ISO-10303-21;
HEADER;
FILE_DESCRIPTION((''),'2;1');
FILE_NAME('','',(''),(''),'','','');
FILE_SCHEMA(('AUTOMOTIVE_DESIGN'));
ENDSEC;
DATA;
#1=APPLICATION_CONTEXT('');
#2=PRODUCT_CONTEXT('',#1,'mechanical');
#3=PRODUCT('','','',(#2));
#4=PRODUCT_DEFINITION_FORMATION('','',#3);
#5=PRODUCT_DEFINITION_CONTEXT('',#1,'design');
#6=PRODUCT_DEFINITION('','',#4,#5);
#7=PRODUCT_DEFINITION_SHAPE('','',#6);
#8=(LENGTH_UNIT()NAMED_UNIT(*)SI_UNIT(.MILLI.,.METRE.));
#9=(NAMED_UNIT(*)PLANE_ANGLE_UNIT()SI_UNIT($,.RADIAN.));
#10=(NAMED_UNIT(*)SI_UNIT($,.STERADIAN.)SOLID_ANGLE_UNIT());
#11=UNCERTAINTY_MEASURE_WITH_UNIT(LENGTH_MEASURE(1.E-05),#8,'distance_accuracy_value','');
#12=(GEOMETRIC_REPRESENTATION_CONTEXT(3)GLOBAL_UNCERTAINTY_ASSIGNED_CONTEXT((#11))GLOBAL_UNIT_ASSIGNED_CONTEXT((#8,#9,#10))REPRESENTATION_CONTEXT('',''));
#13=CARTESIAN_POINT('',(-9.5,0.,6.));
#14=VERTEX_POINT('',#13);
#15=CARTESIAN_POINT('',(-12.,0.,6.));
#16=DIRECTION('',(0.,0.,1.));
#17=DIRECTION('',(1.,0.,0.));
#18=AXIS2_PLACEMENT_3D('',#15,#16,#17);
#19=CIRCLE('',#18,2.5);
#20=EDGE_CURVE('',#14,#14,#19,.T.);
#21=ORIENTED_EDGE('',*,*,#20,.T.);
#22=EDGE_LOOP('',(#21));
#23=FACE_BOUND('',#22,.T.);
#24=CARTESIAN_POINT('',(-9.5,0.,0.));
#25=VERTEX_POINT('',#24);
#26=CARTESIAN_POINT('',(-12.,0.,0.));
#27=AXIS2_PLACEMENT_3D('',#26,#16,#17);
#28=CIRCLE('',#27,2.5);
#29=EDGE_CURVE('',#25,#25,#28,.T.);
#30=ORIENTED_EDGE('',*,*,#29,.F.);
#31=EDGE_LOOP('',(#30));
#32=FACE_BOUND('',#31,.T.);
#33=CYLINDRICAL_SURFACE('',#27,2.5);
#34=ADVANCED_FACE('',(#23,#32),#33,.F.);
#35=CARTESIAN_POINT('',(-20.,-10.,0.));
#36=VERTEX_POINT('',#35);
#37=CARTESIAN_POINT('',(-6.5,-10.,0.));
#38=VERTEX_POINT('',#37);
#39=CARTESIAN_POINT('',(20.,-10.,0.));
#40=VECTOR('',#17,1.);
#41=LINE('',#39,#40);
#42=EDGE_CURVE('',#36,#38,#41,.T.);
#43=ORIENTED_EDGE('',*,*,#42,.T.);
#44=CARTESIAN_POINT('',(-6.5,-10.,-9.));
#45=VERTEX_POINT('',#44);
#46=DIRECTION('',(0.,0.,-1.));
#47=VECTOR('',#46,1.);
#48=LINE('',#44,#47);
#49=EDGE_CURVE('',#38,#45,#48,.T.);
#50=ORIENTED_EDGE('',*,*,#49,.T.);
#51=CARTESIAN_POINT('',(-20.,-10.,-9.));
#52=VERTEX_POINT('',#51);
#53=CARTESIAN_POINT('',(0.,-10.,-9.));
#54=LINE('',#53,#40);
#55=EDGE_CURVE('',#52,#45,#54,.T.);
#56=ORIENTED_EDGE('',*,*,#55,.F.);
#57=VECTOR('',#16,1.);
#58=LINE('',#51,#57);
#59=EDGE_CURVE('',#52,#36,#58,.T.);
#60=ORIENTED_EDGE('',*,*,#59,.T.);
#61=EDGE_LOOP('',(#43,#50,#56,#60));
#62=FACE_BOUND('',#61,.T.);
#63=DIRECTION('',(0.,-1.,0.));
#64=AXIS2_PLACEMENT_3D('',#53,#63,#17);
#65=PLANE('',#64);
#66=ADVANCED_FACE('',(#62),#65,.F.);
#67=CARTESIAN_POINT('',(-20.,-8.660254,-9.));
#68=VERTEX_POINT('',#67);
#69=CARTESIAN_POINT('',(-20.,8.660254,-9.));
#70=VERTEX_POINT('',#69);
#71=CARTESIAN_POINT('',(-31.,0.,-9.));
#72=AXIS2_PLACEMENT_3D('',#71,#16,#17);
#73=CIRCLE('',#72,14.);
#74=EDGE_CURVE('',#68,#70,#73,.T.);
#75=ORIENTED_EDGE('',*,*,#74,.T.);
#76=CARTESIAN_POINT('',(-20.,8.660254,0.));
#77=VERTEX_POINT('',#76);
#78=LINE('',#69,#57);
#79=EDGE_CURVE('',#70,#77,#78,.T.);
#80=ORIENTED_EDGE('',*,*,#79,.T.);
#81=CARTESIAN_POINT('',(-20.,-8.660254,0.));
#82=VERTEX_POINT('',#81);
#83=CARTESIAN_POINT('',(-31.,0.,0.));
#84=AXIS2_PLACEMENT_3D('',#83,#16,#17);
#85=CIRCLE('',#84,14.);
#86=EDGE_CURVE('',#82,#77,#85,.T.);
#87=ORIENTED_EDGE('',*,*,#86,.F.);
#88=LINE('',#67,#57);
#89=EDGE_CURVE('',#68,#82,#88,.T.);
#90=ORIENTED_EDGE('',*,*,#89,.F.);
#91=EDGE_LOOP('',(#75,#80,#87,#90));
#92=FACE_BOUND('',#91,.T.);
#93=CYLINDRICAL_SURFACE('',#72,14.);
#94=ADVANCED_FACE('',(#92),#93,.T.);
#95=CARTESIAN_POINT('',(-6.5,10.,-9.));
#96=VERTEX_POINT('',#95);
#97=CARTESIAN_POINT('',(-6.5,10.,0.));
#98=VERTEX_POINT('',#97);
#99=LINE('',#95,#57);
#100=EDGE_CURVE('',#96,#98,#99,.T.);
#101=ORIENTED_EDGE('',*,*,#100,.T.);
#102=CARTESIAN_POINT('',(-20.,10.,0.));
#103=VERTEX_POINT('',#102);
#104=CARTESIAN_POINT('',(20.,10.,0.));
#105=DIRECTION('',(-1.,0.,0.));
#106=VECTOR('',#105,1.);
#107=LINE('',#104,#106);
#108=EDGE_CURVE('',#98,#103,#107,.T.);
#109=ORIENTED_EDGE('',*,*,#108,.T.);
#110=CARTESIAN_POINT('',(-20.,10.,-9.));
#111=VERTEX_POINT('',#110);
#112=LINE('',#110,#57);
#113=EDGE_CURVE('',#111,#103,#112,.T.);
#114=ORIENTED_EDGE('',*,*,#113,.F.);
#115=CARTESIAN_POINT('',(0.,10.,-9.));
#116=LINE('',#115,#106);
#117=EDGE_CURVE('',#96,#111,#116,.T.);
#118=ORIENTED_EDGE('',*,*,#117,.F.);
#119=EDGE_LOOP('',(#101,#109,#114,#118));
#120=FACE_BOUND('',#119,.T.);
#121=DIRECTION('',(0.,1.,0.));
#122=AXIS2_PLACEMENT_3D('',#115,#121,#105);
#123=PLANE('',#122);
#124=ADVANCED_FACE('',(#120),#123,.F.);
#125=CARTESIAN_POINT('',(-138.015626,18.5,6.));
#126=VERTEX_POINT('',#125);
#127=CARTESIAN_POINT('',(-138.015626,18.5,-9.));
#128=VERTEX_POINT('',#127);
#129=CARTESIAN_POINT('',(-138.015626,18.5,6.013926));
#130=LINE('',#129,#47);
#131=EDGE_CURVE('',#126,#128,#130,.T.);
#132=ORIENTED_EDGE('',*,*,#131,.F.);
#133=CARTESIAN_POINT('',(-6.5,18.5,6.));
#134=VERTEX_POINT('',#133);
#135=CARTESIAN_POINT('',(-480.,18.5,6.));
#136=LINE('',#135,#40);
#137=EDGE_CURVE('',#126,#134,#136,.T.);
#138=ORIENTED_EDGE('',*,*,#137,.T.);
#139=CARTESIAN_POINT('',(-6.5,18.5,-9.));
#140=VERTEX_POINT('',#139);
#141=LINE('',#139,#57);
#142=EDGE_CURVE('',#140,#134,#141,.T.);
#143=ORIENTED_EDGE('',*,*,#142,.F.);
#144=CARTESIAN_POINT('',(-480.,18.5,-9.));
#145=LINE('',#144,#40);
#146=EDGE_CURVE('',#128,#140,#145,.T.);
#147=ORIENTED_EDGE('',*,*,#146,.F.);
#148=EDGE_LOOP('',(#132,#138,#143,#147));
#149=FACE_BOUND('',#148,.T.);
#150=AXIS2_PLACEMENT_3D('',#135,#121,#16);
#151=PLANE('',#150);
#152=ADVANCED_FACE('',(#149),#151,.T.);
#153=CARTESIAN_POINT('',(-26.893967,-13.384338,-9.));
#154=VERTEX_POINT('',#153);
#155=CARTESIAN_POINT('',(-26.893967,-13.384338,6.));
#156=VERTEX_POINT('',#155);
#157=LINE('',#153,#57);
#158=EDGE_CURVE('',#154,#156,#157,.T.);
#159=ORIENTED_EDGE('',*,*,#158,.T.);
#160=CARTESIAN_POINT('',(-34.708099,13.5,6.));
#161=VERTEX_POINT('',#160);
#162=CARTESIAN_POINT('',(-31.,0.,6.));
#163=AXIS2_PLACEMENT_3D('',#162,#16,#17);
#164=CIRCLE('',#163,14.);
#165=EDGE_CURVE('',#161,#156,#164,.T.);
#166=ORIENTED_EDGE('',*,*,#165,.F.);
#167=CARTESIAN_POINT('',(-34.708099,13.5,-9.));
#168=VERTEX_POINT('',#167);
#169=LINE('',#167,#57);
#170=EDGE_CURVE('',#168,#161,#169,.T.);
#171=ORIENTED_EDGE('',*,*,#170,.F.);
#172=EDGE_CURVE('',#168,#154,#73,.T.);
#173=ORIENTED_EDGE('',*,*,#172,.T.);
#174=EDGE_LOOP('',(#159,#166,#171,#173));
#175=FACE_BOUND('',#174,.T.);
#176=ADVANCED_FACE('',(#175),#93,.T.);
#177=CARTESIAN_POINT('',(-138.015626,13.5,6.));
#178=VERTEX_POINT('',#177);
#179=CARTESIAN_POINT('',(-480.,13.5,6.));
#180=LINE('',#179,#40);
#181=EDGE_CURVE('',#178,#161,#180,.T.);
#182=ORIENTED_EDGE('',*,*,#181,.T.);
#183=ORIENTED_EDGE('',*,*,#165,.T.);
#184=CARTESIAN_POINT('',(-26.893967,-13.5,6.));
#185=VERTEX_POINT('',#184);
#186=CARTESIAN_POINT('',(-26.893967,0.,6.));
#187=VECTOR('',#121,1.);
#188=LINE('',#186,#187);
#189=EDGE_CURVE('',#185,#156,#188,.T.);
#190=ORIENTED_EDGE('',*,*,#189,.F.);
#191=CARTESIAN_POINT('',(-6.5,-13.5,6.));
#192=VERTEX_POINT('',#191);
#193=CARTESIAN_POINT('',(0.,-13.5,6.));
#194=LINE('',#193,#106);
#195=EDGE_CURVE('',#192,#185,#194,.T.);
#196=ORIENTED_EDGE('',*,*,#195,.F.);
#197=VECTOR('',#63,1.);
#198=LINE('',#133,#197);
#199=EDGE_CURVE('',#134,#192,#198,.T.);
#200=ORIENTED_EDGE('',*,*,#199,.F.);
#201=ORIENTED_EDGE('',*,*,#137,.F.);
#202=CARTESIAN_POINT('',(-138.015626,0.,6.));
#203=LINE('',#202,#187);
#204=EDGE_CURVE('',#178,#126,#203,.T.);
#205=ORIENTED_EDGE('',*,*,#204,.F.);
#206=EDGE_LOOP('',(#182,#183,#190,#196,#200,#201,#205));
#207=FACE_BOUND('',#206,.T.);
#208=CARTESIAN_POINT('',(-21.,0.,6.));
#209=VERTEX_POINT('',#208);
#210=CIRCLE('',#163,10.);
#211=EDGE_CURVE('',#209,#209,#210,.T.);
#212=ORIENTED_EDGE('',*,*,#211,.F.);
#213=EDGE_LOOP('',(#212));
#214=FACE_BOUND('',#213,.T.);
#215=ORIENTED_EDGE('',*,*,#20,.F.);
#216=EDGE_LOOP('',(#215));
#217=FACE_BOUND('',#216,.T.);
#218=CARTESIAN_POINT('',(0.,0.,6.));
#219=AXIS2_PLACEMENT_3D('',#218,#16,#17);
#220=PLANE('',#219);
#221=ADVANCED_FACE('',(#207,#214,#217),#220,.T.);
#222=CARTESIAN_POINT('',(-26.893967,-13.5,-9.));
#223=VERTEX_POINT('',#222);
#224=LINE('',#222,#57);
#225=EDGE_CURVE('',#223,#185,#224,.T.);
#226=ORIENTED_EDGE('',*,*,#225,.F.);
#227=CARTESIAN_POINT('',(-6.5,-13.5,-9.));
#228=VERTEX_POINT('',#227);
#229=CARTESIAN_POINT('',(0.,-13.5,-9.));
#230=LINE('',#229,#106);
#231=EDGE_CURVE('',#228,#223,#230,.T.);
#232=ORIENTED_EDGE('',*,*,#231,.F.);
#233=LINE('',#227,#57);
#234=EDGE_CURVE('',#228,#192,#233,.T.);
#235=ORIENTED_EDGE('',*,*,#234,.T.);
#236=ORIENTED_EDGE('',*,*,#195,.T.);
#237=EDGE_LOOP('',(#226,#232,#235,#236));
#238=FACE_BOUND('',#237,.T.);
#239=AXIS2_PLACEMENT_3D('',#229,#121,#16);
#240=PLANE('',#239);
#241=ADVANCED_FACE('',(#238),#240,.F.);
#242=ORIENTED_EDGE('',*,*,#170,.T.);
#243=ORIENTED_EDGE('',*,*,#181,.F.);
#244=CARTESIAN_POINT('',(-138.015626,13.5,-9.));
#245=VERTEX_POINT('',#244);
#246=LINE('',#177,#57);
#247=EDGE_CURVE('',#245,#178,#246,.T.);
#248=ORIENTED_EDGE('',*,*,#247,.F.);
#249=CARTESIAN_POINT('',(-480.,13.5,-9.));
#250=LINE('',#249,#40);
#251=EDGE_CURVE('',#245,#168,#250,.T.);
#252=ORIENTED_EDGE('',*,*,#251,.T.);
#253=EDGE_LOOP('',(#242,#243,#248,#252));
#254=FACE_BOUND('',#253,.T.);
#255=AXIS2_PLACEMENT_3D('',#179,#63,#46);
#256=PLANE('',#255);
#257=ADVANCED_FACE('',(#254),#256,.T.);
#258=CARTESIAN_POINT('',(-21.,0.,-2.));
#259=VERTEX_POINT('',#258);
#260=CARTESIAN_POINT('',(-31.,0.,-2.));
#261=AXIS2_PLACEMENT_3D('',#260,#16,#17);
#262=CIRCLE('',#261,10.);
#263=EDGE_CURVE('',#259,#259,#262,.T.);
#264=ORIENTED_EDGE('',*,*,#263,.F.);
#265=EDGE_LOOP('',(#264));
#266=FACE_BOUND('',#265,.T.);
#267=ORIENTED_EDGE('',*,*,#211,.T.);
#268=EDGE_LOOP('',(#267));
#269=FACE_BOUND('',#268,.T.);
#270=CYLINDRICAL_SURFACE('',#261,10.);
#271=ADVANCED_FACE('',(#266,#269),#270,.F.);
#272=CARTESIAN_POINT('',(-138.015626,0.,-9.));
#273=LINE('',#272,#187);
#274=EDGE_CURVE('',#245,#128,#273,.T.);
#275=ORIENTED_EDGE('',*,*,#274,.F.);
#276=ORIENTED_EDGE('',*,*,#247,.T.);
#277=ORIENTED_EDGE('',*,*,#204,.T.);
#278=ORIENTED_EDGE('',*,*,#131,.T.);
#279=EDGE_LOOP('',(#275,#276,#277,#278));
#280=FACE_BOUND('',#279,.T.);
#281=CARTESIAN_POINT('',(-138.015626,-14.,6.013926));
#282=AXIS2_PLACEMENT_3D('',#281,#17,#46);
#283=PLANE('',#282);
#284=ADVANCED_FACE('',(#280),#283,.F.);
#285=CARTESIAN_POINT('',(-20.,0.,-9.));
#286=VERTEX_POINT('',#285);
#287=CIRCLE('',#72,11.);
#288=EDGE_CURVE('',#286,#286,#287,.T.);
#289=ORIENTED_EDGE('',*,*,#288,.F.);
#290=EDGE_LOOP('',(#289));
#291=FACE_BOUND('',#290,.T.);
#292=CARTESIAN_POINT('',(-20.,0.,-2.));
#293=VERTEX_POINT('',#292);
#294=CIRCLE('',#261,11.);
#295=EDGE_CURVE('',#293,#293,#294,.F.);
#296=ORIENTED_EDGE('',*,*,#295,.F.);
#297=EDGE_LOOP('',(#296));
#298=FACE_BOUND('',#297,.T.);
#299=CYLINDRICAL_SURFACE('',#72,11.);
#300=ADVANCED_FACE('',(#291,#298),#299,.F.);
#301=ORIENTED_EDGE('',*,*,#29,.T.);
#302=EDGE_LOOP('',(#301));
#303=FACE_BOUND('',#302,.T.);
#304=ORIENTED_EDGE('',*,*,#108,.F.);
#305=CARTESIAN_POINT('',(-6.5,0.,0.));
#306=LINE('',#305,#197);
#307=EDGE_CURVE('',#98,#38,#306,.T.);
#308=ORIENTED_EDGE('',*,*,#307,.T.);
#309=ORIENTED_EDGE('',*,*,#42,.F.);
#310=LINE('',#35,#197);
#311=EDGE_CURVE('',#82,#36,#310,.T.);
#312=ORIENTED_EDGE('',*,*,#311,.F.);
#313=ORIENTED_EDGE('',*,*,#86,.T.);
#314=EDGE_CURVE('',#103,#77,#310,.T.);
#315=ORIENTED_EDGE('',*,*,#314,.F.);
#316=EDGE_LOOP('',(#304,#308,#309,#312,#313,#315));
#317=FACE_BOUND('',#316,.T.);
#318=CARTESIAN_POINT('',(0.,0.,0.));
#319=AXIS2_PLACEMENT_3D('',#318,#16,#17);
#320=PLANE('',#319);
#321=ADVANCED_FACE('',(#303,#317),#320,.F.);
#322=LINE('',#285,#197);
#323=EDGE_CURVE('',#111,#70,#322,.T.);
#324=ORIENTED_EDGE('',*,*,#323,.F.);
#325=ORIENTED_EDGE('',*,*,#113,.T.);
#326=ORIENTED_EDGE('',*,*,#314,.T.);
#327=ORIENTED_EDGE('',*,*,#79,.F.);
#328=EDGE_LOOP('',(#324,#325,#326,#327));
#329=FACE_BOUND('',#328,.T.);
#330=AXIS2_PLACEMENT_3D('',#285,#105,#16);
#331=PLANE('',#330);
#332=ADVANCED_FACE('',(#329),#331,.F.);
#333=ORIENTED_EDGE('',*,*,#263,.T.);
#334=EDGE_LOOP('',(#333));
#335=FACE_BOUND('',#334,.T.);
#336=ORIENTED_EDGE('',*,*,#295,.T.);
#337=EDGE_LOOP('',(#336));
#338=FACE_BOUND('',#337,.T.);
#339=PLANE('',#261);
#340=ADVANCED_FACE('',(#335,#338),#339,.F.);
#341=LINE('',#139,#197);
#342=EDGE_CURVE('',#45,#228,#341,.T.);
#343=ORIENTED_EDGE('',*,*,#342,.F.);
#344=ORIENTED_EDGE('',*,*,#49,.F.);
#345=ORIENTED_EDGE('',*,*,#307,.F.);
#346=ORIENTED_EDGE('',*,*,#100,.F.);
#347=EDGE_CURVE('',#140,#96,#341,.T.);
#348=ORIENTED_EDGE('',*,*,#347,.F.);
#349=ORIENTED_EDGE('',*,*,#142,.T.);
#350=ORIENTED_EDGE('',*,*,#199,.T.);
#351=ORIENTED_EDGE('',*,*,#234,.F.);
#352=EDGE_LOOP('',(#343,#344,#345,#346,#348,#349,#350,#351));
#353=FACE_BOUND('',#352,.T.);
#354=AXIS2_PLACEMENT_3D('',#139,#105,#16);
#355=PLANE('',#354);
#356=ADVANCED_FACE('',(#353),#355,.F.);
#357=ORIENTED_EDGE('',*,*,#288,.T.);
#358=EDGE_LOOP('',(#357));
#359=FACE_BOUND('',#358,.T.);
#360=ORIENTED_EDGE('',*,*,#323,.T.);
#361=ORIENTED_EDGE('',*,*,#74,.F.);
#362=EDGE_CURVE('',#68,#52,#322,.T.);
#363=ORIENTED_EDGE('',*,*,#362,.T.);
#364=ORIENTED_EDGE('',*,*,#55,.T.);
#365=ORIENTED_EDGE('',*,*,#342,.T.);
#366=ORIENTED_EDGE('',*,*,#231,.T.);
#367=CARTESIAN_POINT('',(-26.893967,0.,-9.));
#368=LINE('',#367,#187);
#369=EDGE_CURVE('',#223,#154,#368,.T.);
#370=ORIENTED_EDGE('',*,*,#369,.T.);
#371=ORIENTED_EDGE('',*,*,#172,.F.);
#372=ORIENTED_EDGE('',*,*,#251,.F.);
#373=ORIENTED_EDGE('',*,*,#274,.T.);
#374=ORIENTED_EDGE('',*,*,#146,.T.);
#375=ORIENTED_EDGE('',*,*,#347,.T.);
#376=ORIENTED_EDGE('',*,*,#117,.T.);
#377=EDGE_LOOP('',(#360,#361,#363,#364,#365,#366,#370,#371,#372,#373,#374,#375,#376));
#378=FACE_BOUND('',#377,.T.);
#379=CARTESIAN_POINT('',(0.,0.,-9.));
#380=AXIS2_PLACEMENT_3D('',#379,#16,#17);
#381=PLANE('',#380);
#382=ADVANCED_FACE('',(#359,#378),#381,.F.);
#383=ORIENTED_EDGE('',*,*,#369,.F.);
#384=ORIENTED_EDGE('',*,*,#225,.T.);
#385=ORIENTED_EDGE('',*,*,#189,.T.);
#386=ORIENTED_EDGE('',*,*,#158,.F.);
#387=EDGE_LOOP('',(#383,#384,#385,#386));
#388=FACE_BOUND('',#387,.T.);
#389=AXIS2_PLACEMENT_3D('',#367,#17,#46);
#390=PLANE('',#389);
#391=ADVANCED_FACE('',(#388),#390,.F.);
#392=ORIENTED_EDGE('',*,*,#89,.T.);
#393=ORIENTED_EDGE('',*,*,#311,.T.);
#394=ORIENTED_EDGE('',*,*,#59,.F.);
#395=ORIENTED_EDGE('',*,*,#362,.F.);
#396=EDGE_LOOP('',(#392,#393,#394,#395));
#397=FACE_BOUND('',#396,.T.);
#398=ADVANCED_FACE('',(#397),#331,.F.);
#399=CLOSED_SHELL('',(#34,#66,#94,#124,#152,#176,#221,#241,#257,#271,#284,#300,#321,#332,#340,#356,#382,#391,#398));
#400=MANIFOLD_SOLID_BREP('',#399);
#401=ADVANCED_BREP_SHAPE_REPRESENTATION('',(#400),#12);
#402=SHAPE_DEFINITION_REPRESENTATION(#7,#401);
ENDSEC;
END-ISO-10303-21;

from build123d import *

# Parameters (mm, degrees)
SKETCH_1_W          = 40
SKETCH_1_H          = 20
EXTRUDE_1_DEPTH     = 6
SKETCH_2_R          = 2.5
CUT_EXTRUDE_1_DEPTH = 24.151673806
EXTRUDE_START       = -15
EXTRUDE_2_OUTLINE_R = 11
EXTRUDE_2_DEPTH     = 15
EXTRUDE_START_2     = -8
SKETCH_5_R          = 11
SKETCH_5_R_2        = 10
EXTRUDE_3_DEPTH     = 8
SKETCH_8_W          = 15
SKETCH_8_H          = 5
EXTRUDE_4_DEPTH     = 500
SKETCH_9_W          = 4.037306924
SKETCH_9_H          = 3.364422437
EXTRUDE_5_DEPTH     = 15
SKETCH_10_W         = 26.5
SKETCH_10_H         = 32
CUT_EXTRUDE_2_DEPTH = 481.59052217
SKETCH_12_W         = 363.719511947
SKETCH_12_H         = 27.53578134
CUT_EXTRUDE_3_DEPTH = 482.183177179


# Read off the part's stored shape, not the designer's step: 凸台-拉伸2
with BuildPart() as part:
    # 草图1 → 凸台-拉伸1 (new body)
    with BuildSketch(Plane.XY):
        Rectangle(SKETCH_1_W, SKETCH_1_H)
    extrude(amount=EXTRUDE_1_DEPTH)

    # 草图2 → 切除-拉伸1 (cut, through all)
    with BuildSketch(Plane.XY.offset(6)):
        with Locations((10, 0)):
            Circle(SKETCH_2_R)
        with Locations((-1, 0)):
            Circle(SKETCH_2_R)
        with Locations((-12, 0)):
            Circle(SKETCH_2_R)
    extrude(amount=-CUT_EXTRUDE_1_DEPTH, mode=Mode.SUBTRACT)

    # 凸台-拉伸2 outline → 凸台-拉伸2 (add)
    with BuildSketch(Plane.XY.offset(6).offset(EXTRUDE_START)):
        with BuildLine():
            Line((20, 10), (20, 13.5))
            Line((20, 13.5), (-26.893967141, 13.5))
            Line((-26.893967141, 13.5), (-26.893967141, 13.384337644))
            ThreePointArc((-26.893967141, 13.384337644), (-45, 0), (-26.893967141, -13.384337644))
            Line((-26.893967141, -13.384337644), (-26.893967141, -13.5))
            Line((-26.893967141, -13.5), (20, -13.5))
            Line((20, -13.5), (20, -10))
            Line((20, -10), (-20, -10))
            Line((-20, -10), (-20, -8.660254038))
            ThreePointArc((-20, -8.660254038), (-17, 0), (-20, 8.660254038))
            Line((-20, 8.660254038), (-20, 10))
            Line((-20, 10), (20, 10))
        make_face()
        with Locations((-31, 0)):
            Circle(EXTRUDE_2_OUTLINE_R, mode=Mode.SUBTRACT)
    extrude(amount=EXTRUDE_2_DEPTH)

    # 草图5 → 凸台-拉伸3 (add)
    with BuildSketch(Plane.XY.offset(6).offset(EXTRUDE_START_2)):
        with Locations((-31, 0)):
            Circle(SKETCH_5_R)
        with Locations((-31, 0)):
            Circle(SKETCH_5_R_2, mode=Mode.SUBTRACT)
    extrude(amount=EXTRUDE_3_DEPTH)

    # 草图8 → 凸台-拉伸4 (add)
    with BuildSketch(Plane(origin=(20, 0, 0), x_dir=(0, 0, -1), z_dir=(1, 0, 0))):
        with Locations((1.5, 16)):
            Rectangle(SKETCH_8_W, SKETCH_8_H)
    extrude(amount=-EXTRUDE_4_DEPTH)

    # 草图9 → 凸台-拉伸5 (add, through all)
    with BuildSketch(Plane(origin=(0, 0, -9), x_dir=(-1, 0, 0), z_dir=(0, 0, -1))):
        with Locations((26.475334378, 14.151164675)):
            Rectangle(SKETCH_9_W, SKETCH_9_H)
    extrude(amount=-EXTRUDE_5_DEPTH)

    # 草图10 → 切除-拉伸2 (cut, through all)
    with BuildSketch(Plane.XY.offset(6)):
        with Locations((6.75, 2.5)):
            Rectangle(SKETCH_10_W, SKETCH_10_H)
    extrude(amount=-CUT_EXTRUDE_2_DEPTH, mode=Mode.SUBTRACT)

    # 草图12 → 切除-拉伸3 (cut, through all)
    with BuildSketch(Plane(origin=(0, 18.5, 0), x_dir=(1, 0, 0), z_dir=(0, 1, 0))):
        with Locations((-319.875382276, 7.753964269)):
            Rectangle(SKETCH_12_W, SKETCH_12_H)
    extrude(amount=-CUT_EXTRUDE_3_DEPTH, mode=Mode.SUBTRACT)


solid = part.part
